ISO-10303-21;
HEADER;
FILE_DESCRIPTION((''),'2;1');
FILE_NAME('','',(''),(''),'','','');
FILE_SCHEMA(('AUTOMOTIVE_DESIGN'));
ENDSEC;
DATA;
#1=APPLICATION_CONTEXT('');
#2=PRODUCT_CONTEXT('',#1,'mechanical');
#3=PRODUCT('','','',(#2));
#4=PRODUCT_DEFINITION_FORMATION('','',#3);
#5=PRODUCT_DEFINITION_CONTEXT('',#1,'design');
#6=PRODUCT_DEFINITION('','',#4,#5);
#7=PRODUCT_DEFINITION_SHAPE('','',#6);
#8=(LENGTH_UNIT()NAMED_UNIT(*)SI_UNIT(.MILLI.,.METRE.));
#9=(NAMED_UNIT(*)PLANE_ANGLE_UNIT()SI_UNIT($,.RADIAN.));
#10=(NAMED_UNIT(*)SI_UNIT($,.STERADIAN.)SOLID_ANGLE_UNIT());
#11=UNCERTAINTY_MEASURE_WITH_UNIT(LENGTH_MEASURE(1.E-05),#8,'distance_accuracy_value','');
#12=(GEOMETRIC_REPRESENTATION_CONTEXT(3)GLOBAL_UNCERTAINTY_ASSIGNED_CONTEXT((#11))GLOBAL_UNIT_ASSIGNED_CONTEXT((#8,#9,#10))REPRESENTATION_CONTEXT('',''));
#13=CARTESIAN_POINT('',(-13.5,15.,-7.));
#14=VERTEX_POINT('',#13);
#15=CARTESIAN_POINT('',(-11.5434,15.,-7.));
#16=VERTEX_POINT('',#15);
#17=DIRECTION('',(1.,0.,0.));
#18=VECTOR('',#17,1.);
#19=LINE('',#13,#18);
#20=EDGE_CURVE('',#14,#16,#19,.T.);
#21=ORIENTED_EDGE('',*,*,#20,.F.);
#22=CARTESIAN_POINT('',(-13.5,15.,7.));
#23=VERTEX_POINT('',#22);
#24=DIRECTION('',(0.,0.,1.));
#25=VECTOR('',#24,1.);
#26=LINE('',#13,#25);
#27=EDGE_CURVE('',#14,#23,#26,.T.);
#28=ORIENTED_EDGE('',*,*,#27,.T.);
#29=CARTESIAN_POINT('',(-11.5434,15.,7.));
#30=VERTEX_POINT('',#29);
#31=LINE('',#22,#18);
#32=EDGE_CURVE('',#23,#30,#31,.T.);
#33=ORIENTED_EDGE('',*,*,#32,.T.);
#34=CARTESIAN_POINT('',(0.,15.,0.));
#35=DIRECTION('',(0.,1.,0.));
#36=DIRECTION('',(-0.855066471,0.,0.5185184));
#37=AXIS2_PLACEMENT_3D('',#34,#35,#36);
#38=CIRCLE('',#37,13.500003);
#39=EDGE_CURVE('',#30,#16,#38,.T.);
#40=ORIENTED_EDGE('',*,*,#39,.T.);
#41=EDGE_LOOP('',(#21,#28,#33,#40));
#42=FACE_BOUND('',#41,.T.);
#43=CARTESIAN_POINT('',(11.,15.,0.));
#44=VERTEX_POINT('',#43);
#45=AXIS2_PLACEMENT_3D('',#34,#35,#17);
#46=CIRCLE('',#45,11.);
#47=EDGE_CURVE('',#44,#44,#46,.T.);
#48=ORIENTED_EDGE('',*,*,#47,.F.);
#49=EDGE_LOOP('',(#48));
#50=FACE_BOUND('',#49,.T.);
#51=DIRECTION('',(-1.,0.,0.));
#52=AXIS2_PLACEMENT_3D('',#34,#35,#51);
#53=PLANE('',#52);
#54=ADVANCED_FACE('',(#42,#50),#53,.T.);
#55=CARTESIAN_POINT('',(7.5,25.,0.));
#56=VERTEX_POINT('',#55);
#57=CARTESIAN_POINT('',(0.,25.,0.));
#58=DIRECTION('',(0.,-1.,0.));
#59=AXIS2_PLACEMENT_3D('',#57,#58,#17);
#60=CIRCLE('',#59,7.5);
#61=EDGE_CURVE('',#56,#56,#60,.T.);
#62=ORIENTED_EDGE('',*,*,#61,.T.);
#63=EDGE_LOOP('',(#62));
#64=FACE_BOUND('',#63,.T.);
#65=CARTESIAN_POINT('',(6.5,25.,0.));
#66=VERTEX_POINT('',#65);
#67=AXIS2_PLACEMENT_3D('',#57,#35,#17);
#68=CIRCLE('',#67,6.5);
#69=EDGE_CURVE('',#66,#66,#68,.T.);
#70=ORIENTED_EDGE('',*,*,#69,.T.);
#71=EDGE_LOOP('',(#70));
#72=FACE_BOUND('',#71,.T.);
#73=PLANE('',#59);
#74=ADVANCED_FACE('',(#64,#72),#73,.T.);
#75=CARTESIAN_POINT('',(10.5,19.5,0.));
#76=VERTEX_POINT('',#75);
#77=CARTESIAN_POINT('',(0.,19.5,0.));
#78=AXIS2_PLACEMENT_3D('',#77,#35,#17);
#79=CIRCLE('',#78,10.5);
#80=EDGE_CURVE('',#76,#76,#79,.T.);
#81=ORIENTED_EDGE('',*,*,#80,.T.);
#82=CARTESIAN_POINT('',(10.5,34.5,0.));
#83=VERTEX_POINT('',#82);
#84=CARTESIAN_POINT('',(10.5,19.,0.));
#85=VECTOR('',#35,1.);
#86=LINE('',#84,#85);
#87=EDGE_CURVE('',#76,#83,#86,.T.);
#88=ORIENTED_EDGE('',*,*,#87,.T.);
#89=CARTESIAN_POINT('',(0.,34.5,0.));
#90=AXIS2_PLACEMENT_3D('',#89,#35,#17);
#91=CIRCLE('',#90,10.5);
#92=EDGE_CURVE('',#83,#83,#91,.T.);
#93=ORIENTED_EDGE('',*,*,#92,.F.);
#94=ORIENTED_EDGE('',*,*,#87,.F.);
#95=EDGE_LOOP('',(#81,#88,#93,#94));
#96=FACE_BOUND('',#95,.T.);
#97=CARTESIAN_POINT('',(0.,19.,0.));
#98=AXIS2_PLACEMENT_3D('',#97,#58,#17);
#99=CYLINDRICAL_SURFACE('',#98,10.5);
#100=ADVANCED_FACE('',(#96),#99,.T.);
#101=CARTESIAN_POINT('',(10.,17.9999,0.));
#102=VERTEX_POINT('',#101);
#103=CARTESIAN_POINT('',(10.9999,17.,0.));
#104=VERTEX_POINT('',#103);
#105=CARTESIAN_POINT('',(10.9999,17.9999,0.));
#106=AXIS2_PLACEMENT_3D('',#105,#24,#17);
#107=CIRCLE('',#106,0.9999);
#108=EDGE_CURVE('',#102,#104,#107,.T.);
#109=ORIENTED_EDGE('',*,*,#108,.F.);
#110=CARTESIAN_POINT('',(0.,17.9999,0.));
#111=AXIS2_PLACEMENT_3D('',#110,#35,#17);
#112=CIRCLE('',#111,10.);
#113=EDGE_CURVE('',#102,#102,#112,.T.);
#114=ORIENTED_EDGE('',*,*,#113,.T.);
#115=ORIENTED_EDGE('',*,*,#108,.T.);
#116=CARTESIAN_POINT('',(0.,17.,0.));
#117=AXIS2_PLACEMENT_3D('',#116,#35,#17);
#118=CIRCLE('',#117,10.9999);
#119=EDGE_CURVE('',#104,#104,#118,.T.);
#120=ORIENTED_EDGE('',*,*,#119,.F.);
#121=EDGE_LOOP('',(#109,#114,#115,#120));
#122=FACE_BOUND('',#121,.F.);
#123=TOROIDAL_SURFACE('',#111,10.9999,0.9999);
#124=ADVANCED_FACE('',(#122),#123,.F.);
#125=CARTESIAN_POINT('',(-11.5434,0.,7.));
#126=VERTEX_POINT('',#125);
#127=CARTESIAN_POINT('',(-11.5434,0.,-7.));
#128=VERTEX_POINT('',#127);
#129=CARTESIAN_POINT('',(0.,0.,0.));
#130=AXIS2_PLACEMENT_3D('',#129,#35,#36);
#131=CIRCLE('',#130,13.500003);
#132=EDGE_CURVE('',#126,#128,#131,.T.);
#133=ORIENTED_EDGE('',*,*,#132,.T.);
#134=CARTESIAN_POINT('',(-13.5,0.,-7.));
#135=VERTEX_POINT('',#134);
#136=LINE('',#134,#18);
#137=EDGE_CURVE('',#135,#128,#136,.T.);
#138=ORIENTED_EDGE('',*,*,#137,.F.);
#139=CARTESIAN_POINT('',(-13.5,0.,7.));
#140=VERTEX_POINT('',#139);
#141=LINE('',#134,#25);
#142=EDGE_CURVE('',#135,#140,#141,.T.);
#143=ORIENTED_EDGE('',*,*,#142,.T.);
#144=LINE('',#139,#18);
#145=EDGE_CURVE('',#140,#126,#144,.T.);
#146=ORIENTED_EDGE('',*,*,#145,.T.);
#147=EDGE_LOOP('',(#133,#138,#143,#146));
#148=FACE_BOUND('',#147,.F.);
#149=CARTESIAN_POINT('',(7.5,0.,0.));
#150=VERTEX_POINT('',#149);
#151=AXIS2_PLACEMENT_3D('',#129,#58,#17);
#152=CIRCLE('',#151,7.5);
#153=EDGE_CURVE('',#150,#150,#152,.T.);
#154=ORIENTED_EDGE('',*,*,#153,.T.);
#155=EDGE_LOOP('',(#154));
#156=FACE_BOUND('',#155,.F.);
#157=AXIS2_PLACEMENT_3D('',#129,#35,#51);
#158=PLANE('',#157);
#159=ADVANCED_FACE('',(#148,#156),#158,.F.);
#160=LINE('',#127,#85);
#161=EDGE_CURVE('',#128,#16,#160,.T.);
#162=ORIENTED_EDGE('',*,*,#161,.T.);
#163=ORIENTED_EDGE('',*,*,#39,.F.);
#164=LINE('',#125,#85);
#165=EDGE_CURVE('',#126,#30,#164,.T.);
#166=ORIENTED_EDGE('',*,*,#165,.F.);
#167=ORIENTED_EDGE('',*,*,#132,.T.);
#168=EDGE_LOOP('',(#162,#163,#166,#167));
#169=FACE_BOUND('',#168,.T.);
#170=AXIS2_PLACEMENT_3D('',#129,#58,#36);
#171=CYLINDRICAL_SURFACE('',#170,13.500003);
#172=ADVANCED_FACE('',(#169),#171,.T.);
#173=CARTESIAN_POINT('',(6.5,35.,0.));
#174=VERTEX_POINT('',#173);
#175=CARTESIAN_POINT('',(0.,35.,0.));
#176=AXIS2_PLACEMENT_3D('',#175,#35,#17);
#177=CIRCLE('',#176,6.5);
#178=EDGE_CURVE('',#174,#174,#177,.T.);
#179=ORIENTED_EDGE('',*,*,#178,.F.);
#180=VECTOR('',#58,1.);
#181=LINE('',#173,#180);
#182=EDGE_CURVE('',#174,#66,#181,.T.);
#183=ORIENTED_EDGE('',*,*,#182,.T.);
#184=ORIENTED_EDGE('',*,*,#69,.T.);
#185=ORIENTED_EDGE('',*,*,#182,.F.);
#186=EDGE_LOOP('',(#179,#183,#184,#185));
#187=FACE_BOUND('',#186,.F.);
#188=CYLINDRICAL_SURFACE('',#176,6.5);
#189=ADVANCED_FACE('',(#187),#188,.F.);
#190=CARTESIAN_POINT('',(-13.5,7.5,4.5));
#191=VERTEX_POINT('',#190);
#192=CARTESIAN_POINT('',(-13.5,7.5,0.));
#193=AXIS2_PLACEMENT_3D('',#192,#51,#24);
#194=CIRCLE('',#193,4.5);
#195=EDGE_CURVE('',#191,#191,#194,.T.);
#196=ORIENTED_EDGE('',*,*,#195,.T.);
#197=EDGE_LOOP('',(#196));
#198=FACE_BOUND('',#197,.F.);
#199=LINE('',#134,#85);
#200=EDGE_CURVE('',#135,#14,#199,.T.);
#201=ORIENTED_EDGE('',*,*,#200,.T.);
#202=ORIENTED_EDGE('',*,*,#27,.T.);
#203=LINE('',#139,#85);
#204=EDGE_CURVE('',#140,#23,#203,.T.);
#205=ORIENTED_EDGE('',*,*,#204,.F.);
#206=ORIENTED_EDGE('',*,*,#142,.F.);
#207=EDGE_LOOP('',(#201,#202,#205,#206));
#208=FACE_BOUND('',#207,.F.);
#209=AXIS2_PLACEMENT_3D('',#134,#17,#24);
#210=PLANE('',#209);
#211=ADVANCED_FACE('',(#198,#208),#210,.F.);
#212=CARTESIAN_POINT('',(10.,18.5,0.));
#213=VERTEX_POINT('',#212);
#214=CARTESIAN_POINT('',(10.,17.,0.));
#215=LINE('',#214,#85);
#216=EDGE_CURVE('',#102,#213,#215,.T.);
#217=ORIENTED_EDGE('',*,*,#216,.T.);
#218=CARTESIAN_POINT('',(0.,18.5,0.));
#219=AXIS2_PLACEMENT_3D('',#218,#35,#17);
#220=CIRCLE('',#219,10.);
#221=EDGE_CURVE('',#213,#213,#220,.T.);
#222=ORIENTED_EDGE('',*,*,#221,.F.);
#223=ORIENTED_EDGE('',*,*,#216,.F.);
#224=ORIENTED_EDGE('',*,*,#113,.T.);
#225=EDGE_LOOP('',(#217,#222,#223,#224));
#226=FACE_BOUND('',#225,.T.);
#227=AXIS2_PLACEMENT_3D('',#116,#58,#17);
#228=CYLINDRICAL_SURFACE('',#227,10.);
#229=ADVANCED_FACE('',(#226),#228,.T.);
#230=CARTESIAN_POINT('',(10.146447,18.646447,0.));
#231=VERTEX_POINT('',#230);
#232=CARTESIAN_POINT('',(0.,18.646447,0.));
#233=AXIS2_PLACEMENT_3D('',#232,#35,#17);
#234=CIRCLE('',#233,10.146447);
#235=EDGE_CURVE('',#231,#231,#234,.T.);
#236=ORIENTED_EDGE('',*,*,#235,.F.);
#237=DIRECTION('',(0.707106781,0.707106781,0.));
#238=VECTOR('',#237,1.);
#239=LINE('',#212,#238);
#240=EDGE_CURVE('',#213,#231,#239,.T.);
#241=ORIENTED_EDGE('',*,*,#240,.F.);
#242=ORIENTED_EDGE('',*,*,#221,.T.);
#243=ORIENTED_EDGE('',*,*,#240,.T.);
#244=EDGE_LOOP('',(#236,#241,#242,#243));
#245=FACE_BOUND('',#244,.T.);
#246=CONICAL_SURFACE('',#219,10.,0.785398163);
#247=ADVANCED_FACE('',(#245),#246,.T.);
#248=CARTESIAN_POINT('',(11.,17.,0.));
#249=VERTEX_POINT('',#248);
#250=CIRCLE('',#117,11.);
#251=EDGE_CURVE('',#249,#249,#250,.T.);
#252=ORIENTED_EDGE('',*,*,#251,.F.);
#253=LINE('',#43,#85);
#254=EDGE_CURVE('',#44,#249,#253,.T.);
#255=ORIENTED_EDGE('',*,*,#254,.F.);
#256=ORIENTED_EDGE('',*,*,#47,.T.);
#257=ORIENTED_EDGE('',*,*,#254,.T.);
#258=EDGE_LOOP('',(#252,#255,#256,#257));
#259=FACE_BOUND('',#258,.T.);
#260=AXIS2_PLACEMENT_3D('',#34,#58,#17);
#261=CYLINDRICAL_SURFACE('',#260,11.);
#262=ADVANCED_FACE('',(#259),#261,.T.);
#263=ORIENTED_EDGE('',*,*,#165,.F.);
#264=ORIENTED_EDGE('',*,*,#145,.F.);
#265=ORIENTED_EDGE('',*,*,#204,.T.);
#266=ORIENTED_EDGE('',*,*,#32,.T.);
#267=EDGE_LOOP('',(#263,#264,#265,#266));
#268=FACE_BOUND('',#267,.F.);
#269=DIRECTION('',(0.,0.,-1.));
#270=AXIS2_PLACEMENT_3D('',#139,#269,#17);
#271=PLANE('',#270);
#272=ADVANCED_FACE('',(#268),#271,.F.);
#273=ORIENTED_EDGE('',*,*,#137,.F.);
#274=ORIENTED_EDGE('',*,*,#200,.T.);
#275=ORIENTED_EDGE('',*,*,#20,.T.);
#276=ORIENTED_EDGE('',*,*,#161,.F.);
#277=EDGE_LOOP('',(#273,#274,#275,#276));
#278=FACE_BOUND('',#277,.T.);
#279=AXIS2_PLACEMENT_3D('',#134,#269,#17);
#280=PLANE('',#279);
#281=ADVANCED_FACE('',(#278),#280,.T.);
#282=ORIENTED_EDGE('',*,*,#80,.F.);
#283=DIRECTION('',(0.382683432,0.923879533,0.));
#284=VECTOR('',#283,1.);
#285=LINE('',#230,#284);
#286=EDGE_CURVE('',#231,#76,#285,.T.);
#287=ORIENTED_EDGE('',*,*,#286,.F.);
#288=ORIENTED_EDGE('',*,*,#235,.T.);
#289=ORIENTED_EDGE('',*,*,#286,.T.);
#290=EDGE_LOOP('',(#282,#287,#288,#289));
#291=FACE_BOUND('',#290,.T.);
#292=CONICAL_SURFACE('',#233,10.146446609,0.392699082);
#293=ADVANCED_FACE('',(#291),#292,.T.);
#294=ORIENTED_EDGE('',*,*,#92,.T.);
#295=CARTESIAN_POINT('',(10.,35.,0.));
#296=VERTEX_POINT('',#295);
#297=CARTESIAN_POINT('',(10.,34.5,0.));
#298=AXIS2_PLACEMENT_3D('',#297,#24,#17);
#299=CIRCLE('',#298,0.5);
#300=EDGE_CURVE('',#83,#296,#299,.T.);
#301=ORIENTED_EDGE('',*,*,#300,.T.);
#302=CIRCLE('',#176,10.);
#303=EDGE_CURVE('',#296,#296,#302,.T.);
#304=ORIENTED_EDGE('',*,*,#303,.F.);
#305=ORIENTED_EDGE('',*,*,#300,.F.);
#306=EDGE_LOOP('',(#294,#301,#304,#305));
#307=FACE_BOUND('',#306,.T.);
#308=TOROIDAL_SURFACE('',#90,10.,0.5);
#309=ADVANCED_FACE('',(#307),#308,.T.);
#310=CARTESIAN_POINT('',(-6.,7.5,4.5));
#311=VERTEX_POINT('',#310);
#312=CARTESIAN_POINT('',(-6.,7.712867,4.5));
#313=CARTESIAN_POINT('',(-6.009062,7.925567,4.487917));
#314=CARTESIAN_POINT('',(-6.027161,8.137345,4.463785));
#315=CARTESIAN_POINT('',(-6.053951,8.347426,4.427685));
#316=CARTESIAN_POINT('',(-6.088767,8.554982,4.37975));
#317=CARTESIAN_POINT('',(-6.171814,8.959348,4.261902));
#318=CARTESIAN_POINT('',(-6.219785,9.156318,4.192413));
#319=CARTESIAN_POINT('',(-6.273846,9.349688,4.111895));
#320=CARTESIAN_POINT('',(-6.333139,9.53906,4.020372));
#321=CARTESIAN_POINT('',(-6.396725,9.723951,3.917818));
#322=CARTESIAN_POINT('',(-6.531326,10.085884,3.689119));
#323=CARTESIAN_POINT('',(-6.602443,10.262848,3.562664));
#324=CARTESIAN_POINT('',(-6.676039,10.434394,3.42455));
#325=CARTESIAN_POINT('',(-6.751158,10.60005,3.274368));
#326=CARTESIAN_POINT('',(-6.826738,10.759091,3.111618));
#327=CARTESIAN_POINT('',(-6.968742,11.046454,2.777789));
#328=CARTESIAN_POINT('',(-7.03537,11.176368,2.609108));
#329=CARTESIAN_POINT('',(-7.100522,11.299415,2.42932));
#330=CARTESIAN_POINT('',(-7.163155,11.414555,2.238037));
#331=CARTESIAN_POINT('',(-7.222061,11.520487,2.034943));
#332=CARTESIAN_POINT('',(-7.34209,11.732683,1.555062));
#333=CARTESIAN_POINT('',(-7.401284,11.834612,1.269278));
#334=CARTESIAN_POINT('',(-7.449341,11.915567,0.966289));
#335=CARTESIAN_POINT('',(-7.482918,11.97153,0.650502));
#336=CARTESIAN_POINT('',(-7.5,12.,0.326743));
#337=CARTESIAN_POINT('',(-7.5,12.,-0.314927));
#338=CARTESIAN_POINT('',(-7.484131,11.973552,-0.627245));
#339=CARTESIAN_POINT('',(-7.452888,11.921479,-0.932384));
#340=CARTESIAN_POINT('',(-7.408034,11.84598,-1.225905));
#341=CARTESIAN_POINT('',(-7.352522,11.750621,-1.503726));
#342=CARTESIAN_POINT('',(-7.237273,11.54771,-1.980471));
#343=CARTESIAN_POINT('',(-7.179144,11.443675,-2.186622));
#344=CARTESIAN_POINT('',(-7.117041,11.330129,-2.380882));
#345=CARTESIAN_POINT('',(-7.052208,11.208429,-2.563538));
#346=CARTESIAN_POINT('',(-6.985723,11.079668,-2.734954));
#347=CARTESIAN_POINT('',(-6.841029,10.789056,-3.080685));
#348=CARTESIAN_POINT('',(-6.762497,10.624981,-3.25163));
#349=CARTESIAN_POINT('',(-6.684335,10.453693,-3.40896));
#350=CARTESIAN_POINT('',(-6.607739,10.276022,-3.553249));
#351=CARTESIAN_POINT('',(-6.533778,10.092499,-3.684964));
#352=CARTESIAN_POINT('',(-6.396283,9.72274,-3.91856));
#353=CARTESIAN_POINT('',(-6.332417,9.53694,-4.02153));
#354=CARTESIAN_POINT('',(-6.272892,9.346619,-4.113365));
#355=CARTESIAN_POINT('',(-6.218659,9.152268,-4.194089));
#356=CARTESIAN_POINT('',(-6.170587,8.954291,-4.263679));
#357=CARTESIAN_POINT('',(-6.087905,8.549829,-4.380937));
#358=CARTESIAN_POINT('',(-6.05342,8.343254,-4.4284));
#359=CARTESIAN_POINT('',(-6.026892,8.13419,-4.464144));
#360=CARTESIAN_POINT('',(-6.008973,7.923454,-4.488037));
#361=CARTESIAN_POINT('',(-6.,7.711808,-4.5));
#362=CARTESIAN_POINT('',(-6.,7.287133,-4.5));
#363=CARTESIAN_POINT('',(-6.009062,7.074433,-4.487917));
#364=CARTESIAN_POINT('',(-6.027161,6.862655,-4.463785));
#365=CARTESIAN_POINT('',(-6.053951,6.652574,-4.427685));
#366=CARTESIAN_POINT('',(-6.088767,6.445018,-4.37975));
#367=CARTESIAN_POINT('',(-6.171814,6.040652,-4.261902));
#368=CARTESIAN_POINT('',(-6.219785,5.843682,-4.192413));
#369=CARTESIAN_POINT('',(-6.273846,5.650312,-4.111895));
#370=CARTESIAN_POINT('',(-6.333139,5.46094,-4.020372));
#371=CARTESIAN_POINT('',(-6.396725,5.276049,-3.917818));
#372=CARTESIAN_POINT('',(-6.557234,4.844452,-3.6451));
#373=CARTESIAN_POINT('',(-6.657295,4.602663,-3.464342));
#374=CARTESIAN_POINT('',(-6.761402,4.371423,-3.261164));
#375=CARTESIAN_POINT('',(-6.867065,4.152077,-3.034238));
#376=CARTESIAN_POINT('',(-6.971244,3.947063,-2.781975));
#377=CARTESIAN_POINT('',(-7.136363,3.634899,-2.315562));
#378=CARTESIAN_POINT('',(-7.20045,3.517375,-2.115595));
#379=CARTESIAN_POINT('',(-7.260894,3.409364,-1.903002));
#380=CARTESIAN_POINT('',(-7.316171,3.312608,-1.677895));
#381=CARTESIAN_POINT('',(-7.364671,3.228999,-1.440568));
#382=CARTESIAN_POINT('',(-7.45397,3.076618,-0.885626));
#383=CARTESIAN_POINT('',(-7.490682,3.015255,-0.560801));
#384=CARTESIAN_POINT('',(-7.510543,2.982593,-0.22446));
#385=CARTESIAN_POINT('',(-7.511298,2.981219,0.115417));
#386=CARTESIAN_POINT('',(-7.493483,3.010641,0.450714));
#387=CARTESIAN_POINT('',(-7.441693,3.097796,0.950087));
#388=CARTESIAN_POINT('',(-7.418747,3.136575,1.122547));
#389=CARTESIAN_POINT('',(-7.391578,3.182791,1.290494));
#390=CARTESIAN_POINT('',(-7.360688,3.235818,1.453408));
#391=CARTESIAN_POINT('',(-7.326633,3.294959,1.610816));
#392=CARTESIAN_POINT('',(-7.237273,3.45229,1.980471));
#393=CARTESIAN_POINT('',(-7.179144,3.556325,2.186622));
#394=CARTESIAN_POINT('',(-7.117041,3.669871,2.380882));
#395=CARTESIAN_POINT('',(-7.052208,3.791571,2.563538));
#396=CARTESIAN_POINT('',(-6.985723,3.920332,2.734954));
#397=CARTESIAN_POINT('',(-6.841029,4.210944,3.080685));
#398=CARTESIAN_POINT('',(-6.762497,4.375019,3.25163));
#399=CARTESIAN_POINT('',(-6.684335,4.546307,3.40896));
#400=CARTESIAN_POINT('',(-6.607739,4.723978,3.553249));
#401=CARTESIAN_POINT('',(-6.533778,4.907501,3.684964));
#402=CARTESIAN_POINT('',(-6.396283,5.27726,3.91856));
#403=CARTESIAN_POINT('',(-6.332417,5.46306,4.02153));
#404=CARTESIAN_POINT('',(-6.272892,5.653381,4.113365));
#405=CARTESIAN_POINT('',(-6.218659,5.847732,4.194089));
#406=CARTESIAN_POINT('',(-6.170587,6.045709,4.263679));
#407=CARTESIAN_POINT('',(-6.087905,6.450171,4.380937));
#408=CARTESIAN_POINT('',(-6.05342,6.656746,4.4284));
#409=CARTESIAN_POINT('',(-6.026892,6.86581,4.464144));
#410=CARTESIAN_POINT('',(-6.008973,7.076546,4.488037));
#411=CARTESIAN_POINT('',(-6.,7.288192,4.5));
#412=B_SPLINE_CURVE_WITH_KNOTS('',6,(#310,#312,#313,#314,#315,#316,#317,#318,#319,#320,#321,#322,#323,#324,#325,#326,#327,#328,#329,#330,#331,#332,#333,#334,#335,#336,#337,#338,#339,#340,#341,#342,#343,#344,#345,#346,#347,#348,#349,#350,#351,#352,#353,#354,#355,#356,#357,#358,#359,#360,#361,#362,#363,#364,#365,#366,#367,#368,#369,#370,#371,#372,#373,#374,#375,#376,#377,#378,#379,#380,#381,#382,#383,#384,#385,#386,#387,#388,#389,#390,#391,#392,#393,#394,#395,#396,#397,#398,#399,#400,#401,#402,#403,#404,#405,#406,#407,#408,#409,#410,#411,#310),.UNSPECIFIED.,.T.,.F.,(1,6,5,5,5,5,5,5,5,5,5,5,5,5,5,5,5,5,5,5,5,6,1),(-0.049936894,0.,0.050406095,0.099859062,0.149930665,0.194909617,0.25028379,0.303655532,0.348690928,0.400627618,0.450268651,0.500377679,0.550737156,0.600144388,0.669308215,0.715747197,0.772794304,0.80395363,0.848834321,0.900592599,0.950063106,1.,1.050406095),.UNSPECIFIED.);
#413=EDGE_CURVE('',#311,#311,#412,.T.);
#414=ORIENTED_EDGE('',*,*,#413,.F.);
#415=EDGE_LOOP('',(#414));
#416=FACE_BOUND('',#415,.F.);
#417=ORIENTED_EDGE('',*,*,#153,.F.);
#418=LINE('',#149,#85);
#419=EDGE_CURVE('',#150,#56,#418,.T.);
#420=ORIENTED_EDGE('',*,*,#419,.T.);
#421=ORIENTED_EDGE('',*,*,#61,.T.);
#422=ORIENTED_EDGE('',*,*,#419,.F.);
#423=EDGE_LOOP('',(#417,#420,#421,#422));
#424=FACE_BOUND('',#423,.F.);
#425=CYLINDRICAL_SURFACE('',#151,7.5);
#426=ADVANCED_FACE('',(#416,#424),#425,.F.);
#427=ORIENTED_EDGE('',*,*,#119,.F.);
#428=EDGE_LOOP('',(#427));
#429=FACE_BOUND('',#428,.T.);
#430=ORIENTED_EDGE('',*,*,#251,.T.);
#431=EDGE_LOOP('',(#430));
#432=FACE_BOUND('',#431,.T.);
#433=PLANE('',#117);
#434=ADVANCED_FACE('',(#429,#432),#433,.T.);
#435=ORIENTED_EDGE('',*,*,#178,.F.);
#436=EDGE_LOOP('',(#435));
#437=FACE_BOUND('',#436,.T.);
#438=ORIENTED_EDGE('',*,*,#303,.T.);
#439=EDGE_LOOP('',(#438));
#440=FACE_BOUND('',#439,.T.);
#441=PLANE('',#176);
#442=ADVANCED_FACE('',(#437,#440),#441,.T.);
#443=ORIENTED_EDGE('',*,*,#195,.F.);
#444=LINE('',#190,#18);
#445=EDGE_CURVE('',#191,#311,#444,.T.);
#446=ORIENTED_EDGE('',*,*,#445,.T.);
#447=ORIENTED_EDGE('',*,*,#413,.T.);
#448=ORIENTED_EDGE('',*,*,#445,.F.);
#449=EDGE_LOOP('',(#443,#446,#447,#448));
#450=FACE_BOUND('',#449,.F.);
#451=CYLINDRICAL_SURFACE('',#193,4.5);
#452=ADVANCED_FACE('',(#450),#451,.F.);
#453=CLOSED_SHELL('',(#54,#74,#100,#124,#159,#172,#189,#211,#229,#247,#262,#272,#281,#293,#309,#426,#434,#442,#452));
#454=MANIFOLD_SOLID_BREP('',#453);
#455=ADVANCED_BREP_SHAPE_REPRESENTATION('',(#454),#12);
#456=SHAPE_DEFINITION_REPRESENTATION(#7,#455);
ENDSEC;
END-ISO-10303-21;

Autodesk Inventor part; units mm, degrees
ref_plane "YZ Plane" through (0, 0, 0) normal (1, 0, 0) x (0, 1, 0)
ref_plane "XZ Plane" through (0, 0, 0) normal (0, 1, 0) x (-1, 0, 0)
ref_plane "XY Plane" through (0, 0, 0) normal (0, 0, 1) x (1, 0, 0)
sketch "Sketch1" plane through (0, 0, 0) normal (0, 1, 0) x (-1, 0, 0)
  arc A0 (11.5434, 7) -> (11.5434, -7) centre (0, 0) ccw
  line L0 (13.5, 0) -> (20.5, 0) construction
  line L1 (13.5, -7) -> (13.5, 7)
  line L2 (13.5, 7) -> (11.5434, 7)
  line L3 (13.5, -7) -> (11.5434, -7)
  dimension "d0" = 27
  dimension "d1" = 7
  dimension "d3" = 14
extrude "Extrusion1" add sketch "Sketch1" along normal blind 15
sketch "Sketch2" plane through (0, 15, 0) normal (0, 1, 0) x (1, 0, 0)
  circle A0 centre (0, 0) radius 11
  dimension "d6" = 22
extrude "Extrusion2" add sketch "Sketch2" along normal blind 2
sketch "Sketch3" plane through (0, 17, 0) normal (0, 1, 0) x (1, 0, 0)
  circle A0 centre (0, 0) radius 10
  dimension "d9" = 20
extrude "Extrusion3" add sketch "Sketch3" along normal blind 2
sketch "Sketch4" plane through (0, 19, 0) normal (0, 1, 0) x (1, 0, 0)
  circle A0 centre (0, 0) radius 10.5
  dimension "d12" = 21
extrude "Extrusion4" add sketch "Sketch4" along normal blind 16
fillet "Fillet1" radius 1 1 edges at (-10, 17, 0)
chamfer "Chamfer1" distance 0.5 angle 45 2 edges at (-10, 19, 0) (-10.5, 19, 0)
fillet "Fillet2" radius 0.5 1 edges at (-10.5, 35, 0)
thread "Thread1" size "M10x1" class "6g" standard "ISO Metric profile" full length
sketch "Sketch5" plane through (-13.5, 0, -7) normal (-1, 0, 0) x (0, 0, 1)
  point P0 (7, 0)
sketch "Sketch6" plane through (0, 0, 0) normal (0, -1, 0) x (1, 0, 0)
  circle A0 centre (0, 0) radius 7.5
  dimension "d22" = 15
extrude "Extrusion5" cut sketch "Sketch6" against normal blind 25
sketch "Sketch7" plane through (-13.5, 0, -7) normal (-1, 0, 0) x (0, 0, 1)
  circle A0 centre (7, 7.5) radius 4.5
  point P0 (7, 0)
  dimension "d25" = 9
extrude "Extrusion6" cut sketch "Sketch7" against normal blind 18
thread "Thread2" size "M8x0.8" class "6H" standard "ISO Metric profile" full length
sketch "Sketch8" plane through (0, 35, 0) normal (0, 1, 0) x (1, 0, 0)
  circle A0 centre (0, 0) radius 6.5
  dimension "d30" = 13
extrude "Extrusion7" cut sketch "Sketch8" against normal blind 18
sketch "Sketch9" plane through (0, 35, 0) normal (0, 1, 0) x (1, 0, 0)
  point P0 (0, 0)
properties part number "prednji deo" material "ABS Plastic"
